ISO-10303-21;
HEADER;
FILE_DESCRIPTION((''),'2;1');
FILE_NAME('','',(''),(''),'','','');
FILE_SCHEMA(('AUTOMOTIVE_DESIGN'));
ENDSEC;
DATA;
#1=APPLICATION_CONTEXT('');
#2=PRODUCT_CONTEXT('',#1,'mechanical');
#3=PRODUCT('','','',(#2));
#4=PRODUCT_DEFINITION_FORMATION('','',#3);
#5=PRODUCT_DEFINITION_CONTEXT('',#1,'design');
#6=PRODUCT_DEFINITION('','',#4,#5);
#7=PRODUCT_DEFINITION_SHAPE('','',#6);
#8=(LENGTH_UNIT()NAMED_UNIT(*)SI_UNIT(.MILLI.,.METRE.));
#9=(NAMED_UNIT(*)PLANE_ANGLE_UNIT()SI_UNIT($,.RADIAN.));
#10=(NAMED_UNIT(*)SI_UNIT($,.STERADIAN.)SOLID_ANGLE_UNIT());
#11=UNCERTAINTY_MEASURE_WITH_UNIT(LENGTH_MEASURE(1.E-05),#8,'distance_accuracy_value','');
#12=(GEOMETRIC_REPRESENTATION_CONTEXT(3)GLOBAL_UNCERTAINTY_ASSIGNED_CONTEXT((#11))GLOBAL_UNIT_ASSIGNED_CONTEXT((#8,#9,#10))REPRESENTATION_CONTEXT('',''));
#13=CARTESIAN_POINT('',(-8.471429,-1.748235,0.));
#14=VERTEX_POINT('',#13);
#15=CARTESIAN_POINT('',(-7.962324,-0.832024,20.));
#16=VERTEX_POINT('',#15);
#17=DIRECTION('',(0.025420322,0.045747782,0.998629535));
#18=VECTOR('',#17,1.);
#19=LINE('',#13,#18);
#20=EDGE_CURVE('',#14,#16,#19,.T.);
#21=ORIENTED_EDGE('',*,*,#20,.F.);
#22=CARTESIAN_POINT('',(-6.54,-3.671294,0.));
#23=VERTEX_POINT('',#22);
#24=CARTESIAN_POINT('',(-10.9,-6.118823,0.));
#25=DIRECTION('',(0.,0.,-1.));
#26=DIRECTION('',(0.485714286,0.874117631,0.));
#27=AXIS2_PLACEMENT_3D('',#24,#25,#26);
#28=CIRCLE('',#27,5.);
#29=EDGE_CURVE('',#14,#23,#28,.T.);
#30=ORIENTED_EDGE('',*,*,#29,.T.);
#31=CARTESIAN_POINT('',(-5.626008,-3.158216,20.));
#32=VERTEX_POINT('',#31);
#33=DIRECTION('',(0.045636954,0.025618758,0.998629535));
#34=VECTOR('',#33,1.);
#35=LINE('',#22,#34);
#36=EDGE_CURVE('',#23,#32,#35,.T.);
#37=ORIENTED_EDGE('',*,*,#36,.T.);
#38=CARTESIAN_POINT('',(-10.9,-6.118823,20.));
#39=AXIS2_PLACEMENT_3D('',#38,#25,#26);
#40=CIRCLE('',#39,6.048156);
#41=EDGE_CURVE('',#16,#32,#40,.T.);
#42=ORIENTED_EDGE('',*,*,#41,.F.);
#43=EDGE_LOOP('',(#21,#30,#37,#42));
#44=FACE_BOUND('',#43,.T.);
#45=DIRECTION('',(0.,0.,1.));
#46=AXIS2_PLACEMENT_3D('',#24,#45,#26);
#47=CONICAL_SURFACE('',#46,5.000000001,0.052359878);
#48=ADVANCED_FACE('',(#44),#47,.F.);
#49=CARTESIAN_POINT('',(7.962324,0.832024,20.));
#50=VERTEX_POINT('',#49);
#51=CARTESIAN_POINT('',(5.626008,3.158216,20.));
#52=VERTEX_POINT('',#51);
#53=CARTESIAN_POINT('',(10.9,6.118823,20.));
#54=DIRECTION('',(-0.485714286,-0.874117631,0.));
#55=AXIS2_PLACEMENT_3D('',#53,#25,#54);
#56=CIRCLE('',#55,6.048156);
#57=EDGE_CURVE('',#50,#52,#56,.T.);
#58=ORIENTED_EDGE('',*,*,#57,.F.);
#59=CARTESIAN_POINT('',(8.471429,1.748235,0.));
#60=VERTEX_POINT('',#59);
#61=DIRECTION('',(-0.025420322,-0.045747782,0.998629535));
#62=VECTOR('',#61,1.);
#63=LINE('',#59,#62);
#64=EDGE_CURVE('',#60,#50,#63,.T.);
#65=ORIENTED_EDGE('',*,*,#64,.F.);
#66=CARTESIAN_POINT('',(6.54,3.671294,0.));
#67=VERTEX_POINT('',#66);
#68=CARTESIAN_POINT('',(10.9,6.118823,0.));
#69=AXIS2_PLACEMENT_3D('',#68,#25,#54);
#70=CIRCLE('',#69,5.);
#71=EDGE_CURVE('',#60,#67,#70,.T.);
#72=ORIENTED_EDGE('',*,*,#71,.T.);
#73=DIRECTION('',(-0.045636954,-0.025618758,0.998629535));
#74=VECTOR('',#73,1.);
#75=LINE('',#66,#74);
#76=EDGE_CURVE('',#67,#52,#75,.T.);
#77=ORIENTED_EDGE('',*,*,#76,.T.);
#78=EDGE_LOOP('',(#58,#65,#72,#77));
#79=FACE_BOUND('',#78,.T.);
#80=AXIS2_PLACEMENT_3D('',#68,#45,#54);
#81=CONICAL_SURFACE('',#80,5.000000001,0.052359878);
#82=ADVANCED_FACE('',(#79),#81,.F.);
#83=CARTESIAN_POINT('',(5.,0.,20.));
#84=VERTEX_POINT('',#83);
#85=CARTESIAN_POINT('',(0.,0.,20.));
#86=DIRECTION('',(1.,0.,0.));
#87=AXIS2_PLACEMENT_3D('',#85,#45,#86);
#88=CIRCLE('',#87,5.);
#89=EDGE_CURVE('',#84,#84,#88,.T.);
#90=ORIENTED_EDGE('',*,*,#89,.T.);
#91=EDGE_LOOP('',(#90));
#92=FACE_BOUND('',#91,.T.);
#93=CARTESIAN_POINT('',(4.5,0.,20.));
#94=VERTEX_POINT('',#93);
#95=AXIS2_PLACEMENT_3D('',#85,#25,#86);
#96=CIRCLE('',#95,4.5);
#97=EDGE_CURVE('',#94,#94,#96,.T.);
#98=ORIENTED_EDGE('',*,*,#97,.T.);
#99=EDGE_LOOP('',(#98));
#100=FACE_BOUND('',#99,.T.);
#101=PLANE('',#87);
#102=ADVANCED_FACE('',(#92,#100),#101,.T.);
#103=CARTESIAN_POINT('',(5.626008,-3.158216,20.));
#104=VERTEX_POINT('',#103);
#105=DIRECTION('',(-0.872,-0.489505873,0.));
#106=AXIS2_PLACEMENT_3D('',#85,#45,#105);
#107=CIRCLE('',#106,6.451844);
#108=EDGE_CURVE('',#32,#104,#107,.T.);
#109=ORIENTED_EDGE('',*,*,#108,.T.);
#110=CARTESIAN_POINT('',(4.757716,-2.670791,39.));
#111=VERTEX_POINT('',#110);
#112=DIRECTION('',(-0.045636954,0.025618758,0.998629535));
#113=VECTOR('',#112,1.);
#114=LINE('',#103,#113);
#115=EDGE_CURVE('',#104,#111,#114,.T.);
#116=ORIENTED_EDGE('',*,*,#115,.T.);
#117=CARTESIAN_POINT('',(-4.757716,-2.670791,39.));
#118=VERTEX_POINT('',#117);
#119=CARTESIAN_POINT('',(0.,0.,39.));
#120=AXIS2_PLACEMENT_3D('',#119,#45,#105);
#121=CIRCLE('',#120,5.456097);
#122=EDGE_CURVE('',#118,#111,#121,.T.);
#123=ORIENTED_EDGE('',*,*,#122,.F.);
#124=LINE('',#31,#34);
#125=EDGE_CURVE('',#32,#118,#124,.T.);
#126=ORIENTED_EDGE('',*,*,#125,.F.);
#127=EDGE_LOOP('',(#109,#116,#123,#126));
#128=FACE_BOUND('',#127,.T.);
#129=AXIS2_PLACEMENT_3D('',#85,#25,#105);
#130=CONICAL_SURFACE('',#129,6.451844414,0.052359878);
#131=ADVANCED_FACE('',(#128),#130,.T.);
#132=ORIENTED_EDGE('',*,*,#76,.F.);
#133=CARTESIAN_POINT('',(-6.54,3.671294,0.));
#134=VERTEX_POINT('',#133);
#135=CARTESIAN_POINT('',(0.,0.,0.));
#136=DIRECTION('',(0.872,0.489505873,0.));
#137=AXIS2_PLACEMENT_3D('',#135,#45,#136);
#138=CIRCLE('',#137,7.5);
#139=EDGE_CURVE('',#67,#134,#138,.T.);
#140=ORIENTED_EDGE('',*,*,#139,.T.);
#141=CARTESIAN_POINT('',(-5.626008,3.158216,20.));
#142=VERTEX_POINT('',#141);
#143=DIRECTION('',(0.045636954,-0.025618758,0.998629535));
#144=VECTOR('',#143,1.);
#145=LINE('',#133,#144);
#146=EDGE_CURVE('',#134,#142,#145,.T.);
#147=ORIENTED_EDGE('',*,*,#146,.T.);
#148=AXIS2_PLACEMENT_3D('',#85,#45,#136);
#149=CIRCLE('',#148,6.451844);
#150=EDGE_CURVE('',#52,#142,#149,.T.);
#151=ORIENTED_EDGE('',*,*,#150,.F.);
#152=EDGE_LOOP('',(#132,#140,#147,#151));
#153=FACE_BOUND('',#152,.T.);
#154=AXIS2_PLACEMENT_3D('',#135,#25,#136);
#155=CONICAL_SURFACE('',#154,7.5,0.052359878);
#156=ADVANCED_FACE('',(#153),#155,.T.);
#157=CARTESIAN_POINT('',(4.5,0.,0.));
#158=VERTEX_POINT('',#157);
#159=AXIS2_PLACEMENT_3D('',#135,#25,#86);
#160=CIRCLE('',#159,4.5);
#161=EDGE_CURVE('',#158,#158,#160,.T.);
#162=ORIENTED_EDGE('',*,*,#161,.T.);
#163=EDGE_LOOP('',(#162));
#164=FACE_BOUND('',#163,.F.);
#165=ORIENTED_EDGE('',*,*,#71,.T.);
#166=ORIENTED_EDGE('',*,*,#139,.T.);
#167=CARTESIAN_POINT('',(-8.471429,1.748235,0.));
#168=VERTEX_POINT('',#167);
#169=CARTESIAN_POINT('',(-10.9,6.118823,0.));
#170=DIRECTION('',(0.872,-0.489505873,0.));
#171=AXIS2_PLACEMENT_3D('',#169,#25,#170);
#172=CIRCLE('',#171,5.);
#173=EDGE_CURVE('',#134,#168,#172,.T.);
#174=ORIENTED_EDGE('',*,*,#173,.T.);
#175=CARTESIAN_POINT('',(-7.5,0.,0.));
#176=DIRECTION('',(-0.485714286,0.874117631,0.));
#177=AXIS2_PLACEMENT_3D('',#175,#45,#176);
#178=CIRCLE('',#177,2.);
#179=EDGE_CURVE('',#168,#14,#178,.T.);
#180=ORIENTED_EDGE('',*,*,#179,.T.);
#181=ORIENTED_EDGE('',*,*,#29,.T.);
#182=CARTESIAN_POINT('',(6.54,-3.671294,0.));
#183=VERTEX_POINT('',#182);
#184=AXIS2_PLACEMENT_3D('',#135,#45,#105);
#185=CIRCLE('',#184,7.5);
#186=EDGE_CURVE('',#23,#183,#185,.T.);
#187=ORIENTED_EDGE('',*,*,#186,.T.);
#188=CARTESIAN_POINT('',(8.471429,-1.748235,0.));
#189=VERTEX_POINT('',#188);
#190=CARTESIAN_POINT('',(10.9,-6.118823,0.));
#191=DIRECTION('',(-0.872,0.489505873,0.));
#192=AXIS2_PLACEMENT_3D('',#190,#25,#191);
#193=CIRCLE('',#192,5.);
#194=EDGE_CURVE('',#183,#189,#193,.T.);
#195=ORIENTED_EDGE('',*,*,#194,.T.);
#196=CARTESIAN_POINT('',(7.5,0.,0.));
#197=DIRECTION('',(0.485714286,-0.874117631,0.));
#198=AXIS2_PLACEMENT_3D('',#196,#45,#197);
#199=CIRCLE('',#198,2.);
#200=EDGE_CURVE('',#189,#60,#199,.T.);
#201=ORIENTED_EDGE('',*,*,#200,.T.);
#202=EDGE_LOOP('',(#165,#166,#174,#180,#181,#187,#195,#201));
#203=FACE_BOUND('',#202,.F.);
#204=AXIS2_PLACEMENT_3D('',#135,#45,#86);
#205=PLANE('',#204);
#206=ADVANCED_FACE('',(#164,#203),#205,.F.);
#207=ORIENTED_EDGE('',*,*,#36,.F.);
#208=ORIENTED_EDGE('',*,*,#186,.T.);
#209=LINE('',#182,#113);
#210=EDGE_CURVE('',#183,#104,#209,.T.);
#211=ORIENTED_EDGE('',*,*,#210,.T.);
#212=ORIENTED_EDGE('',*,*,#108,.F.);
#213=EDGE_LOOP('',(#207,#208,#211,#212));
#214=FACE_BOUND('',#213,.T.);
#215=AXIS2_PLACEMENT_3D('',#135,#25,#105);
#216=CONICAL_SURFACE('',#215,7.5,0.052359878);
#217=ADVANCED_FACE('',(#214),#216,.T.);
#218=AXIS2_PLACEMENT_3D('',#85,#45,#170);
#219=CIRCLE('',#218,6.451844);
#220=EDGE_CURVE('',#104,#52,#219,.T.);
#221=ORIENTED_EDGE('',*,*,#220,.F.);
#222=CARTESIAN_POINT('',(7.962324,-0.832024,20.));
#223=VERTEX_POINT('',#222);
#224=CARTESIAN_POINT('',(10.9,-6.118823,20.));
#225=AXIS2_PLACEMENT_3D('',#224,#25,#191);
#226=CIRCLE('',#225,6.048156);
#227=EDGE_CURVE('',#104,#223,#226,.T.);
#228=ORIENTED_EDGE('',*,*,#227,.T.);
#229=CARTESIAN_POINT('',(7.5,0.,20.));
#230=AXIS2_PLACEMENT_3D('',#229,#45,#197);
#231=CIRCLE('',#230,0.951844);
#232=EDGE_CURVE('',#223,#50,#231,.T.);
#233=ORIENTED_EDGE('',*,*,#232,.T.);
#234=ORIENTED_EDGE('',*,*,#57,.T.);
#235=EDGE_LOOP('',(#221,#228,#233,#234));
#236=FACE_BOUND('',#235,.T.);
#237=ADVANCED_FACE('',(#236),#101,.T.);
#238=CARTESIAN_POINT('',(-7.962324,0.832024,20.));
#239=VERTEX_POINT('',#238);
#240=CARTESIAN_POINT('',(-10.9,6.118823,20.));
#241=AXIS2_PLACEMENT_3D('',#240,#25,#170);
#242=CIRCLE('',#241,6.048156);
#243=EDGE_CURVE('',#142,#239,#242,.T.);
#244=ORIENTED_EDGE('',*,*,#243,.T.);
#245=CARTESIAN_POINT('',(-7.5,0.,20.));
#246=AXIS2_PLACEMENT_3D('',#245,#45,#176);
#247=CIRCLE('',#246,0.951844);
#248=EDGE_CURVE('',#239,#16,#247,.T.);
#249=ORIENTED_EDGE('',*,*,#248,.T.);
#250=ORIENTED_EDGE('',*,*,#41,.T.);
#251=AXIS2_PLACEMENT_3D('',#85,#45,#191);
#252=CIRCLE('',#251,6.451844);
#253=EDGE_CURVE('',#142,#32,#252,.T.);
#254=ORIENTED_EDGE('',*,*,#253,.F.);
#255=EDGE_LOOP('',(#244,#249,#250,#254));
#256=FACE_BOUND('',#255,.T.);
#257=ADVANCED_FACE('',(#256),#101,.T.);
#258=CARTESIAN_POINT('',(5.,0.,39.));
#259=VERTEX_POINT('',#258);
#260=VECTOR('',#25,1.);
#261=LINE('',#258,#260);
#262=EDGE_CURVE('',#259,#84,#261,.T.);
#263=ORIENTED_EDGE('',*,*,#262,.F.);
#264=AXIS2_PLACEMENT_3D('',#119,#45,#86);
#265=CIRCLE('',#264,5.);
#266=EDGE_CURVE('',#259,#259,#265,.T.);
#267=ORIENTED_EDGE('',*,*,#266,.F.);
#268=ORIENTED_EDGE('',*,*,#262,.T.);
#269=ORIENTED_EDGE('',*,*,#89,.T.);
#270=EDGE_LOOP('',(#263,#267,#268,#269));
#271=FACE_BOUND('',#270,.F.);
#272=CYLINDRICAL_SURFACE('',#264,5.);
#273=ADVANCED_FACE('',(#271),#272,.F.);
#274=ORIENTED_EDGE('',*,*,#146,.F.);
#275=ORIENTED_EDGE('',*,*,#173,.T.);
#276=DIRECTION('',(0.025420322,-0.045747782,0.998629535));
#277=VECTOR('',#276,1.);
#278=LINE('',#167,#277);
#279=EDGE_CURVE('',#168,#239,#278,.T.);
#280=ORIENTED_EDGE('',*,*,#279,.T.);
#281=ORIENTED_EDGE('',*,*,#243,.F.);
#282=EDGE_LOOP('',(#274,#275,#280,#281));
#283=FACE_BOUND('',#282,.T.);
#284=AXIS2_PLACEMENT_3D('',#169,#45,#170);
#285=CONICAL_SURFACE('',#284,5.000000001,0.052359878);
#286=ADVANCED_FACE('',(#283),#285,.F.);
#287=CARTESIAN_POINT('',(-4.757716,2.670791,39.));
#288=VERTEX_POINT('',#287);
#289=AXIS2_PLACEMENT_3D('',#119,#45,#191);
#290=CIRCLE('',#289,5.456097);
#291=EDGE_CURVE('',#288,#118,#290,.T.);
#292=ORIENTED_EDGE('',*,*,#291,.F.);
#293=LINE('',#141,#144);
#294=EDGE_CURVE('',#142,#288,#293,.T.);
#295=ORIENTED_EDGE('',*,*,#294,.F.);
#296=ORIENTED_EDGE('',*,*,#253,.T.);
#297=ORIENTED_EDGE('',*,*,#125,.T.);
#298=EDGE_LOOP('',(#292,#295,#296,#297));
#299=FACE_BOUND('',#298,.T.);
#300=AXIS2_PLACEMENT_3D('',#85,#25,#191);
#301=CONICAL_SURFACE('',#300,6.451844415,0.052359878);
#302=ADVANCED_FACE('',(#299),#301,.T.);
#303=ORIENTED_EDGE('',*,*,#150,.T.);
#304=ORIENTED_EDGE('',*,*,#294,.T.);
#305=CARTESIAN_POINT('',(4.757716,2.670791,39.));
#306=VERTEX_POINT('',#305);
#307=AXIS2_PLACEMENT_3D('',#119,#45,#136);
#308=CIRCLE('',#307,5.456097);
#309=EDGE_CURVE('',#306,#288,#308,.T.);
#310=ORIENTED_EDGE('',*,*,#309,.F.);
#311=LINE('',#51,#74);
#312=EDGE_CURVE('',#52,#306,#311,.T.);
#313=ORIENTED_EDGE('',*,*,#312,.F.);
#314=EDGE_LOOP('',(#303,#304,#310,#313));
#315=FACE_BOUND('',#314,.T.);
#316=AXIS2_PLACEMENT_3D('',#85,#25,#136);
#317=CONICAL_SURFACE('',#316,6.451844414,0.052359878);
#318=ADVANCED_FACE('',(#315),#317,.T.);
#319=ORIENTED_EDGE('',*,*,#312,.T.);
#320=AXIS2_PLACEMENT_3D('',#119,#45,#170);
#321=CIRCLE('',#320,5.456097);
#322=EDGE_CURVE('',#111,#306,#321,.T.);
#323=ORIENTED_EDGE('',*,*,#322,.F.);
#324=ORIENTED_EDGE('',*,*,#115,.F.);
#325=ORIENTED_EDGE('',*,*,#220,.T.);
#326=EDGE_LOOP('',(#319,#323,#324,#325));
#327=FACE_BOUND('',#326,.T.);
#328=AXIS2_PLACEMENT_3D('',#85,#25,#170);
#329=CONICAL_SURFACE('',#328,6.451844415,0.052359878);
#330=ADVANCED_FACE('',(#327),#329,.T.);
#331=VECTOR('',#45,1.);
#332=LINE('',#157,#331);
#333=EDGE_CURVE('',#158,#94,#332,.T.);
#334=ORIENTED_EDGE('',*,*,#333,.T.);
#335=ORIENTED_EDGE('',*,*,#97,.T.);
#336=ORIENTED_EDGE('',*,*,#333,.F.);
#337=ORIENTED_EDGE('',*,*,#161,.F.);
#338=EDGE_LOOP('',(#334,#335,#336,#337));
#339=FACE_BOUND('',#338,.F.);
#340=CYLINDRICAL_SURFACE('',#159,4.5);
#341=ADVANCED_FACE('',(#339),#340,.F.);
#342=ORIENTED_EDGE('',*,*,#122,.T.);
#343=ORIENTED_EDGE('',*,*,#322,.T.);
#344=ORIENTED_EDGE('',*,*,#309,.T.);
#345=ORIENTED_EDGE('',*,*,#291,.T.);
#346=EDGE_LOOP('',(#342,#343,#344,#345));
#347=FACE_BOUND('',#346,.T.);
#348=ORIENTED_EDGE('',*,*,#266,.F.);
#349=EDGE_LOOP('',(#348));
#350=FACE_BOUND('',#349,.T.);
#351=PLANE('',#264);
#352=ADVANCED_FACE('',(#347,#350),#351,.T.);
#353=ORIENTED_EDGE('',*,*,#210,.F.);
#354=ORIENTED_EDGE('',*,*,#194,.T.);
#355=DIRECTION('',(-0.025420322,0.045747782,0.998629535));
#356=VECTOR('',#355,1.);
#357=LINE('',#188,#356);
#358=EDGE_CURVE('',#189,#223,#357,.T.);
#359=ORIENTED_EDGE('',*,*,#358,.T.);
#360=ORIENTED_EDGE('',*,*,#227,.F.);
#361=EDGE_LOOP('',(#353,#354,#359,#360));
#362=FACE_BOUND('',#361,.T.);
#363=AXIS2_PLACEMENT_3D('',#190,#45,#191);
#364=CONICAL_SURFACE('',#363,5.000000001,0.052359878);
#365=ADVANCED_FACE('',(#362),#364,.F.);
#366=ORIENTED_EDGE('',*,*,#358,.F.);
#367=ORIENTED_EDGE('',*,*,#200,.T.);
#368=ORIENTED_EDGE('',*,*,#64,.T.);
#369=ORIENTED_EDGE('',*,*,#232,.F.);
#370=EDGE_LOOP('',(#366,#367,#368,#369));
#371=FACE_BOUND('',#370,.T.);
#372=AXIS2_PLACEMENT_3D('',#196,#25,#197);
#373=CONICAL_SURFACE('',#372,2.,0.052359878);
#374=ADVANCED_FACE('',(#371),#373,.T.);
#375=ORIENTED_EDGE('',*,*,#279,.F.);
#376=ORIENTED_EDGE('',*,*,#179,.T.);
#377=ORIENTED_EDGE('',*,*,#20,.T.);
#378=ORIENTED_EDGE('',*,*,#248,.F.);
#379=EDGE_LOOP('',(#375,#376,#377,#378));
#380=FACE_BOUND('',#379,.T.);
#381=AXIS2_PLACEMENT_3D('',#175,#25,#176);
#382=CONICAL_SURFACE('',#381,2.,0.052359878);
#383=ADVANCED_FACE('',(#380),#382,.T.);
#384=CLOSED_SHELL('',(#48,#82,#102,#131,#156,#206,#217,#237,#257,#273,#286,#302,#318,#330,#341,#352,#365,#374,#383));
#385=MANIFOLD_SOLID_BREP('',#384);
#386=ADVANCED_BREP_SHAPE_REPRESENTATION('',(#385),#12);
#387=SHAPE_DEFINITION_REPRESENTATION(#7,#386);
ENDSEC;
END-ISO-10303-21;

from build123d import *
from build123d import SkipClean  # not in build123d's __all__

# Parameters (mm, degrees)
F1_DEPTH = 20
F1_TAPER = 3
F3_DEPTH = 19
F3_TAPER = 3
F4_R     = 5
F5_DEPTH = 19
F6_R     = 4.5
F7_DEPTH = 20


with BuildPart() as f1:
    # F0 (on Top) → F1 (new body)
    with BuildSketch(Plane.XY):
        with BuildLine():
            ThreePointArc((-8.4714285714, -1.7482352618), (-7.3721516068, -2.5756206682), (-6.54, -3.6712940498))
            ThreePointArc((-6.54, -3.6712940498), (0, -7.5), (6.54, -3.6712940498))
            ThreePointArc((6.54, -3.6712940498), (7.3721516068, -2.5756206682), (8.4714285714, -1.7482352618))
            ThreePointArc((8.4714285714, -1.7482352618), (9.5, 0), (8.4714285714, 1.7482352618))
            ThreePointArc((8.4714285714, 1.7482352618), (7.3721516068, 2.5756206682), (6.54, 3.6712940498))
            ThreePointArc((6.54, 3.6712940498), (0, 7.5), (-6.54, 3.6712940498))
            ThreePointArc((-6.54, 3.6712940498), (-7.3721516068, 2.5756206682), (-8.4714285714, 1.7482352618))
            ThreePointArc((-8.4714285714, 1.7482352618), (-9.5, 0), (-8.4714285714, -1.7482352618))
        make_face()
    extrude(amount=F1_DEPTH, taper=F1_TAPER)

    # F2 (on face) → F3 (join)
    with BuildSketch(Plane.XY.offset(20)):
        with BuildLine():
            ThreePointArc((-5.6260083293, 3.1582157345), (-6.4518444143, 0), (-5.6260083293, -3.1582157345))
            ThreePointArc((-5.6260083293, -3.1582157345), (0, -6.4518444143), (5.6260083293, -3.1582157345))
            ThreePointArc((5.6260083293, -3.1582157345), (6.4518444143, 0), (5.6260083293, 3.1582157345))
            ThreePointArc((5.6260083293, 3.1582157345), (0, 6.4518444143), (-5.6260083293, 3.1582157345))
        make_face()
    with SkipClean():  # cleaning this boolean's faces spoils the solid; the shape is the same uncleaned
        extrude(amount=F3_DEPTH, taper=F3_TAPER)

    # F4 (on face) → F5 (cut)
    with BuildSketch(Plane.XY.offset(39)):
        Circle(F4_R)
    with SkipClean():  # cleaning this boolean's faces spoils the solid; the shape is the same uncleaned
        extrude(amount=-F5_DEPTH, mode=Mode.SUBTRACT)

    # F6 (on face) → F7 (cut, through all)
    with BuildSketch(Plane(origin=(0, 0, 0), x_dir=(1, 0, 0), z_dir=(0, 0, -1))):
        Circle(F6_R)
    with SkipClean():  # cleaning this boolean's faces spoils the solid; the shape is the same uncleaned
        extrude(amount=-F7_DEPTH, mode=Mode.SUBTRACT)


solid = f1.part
